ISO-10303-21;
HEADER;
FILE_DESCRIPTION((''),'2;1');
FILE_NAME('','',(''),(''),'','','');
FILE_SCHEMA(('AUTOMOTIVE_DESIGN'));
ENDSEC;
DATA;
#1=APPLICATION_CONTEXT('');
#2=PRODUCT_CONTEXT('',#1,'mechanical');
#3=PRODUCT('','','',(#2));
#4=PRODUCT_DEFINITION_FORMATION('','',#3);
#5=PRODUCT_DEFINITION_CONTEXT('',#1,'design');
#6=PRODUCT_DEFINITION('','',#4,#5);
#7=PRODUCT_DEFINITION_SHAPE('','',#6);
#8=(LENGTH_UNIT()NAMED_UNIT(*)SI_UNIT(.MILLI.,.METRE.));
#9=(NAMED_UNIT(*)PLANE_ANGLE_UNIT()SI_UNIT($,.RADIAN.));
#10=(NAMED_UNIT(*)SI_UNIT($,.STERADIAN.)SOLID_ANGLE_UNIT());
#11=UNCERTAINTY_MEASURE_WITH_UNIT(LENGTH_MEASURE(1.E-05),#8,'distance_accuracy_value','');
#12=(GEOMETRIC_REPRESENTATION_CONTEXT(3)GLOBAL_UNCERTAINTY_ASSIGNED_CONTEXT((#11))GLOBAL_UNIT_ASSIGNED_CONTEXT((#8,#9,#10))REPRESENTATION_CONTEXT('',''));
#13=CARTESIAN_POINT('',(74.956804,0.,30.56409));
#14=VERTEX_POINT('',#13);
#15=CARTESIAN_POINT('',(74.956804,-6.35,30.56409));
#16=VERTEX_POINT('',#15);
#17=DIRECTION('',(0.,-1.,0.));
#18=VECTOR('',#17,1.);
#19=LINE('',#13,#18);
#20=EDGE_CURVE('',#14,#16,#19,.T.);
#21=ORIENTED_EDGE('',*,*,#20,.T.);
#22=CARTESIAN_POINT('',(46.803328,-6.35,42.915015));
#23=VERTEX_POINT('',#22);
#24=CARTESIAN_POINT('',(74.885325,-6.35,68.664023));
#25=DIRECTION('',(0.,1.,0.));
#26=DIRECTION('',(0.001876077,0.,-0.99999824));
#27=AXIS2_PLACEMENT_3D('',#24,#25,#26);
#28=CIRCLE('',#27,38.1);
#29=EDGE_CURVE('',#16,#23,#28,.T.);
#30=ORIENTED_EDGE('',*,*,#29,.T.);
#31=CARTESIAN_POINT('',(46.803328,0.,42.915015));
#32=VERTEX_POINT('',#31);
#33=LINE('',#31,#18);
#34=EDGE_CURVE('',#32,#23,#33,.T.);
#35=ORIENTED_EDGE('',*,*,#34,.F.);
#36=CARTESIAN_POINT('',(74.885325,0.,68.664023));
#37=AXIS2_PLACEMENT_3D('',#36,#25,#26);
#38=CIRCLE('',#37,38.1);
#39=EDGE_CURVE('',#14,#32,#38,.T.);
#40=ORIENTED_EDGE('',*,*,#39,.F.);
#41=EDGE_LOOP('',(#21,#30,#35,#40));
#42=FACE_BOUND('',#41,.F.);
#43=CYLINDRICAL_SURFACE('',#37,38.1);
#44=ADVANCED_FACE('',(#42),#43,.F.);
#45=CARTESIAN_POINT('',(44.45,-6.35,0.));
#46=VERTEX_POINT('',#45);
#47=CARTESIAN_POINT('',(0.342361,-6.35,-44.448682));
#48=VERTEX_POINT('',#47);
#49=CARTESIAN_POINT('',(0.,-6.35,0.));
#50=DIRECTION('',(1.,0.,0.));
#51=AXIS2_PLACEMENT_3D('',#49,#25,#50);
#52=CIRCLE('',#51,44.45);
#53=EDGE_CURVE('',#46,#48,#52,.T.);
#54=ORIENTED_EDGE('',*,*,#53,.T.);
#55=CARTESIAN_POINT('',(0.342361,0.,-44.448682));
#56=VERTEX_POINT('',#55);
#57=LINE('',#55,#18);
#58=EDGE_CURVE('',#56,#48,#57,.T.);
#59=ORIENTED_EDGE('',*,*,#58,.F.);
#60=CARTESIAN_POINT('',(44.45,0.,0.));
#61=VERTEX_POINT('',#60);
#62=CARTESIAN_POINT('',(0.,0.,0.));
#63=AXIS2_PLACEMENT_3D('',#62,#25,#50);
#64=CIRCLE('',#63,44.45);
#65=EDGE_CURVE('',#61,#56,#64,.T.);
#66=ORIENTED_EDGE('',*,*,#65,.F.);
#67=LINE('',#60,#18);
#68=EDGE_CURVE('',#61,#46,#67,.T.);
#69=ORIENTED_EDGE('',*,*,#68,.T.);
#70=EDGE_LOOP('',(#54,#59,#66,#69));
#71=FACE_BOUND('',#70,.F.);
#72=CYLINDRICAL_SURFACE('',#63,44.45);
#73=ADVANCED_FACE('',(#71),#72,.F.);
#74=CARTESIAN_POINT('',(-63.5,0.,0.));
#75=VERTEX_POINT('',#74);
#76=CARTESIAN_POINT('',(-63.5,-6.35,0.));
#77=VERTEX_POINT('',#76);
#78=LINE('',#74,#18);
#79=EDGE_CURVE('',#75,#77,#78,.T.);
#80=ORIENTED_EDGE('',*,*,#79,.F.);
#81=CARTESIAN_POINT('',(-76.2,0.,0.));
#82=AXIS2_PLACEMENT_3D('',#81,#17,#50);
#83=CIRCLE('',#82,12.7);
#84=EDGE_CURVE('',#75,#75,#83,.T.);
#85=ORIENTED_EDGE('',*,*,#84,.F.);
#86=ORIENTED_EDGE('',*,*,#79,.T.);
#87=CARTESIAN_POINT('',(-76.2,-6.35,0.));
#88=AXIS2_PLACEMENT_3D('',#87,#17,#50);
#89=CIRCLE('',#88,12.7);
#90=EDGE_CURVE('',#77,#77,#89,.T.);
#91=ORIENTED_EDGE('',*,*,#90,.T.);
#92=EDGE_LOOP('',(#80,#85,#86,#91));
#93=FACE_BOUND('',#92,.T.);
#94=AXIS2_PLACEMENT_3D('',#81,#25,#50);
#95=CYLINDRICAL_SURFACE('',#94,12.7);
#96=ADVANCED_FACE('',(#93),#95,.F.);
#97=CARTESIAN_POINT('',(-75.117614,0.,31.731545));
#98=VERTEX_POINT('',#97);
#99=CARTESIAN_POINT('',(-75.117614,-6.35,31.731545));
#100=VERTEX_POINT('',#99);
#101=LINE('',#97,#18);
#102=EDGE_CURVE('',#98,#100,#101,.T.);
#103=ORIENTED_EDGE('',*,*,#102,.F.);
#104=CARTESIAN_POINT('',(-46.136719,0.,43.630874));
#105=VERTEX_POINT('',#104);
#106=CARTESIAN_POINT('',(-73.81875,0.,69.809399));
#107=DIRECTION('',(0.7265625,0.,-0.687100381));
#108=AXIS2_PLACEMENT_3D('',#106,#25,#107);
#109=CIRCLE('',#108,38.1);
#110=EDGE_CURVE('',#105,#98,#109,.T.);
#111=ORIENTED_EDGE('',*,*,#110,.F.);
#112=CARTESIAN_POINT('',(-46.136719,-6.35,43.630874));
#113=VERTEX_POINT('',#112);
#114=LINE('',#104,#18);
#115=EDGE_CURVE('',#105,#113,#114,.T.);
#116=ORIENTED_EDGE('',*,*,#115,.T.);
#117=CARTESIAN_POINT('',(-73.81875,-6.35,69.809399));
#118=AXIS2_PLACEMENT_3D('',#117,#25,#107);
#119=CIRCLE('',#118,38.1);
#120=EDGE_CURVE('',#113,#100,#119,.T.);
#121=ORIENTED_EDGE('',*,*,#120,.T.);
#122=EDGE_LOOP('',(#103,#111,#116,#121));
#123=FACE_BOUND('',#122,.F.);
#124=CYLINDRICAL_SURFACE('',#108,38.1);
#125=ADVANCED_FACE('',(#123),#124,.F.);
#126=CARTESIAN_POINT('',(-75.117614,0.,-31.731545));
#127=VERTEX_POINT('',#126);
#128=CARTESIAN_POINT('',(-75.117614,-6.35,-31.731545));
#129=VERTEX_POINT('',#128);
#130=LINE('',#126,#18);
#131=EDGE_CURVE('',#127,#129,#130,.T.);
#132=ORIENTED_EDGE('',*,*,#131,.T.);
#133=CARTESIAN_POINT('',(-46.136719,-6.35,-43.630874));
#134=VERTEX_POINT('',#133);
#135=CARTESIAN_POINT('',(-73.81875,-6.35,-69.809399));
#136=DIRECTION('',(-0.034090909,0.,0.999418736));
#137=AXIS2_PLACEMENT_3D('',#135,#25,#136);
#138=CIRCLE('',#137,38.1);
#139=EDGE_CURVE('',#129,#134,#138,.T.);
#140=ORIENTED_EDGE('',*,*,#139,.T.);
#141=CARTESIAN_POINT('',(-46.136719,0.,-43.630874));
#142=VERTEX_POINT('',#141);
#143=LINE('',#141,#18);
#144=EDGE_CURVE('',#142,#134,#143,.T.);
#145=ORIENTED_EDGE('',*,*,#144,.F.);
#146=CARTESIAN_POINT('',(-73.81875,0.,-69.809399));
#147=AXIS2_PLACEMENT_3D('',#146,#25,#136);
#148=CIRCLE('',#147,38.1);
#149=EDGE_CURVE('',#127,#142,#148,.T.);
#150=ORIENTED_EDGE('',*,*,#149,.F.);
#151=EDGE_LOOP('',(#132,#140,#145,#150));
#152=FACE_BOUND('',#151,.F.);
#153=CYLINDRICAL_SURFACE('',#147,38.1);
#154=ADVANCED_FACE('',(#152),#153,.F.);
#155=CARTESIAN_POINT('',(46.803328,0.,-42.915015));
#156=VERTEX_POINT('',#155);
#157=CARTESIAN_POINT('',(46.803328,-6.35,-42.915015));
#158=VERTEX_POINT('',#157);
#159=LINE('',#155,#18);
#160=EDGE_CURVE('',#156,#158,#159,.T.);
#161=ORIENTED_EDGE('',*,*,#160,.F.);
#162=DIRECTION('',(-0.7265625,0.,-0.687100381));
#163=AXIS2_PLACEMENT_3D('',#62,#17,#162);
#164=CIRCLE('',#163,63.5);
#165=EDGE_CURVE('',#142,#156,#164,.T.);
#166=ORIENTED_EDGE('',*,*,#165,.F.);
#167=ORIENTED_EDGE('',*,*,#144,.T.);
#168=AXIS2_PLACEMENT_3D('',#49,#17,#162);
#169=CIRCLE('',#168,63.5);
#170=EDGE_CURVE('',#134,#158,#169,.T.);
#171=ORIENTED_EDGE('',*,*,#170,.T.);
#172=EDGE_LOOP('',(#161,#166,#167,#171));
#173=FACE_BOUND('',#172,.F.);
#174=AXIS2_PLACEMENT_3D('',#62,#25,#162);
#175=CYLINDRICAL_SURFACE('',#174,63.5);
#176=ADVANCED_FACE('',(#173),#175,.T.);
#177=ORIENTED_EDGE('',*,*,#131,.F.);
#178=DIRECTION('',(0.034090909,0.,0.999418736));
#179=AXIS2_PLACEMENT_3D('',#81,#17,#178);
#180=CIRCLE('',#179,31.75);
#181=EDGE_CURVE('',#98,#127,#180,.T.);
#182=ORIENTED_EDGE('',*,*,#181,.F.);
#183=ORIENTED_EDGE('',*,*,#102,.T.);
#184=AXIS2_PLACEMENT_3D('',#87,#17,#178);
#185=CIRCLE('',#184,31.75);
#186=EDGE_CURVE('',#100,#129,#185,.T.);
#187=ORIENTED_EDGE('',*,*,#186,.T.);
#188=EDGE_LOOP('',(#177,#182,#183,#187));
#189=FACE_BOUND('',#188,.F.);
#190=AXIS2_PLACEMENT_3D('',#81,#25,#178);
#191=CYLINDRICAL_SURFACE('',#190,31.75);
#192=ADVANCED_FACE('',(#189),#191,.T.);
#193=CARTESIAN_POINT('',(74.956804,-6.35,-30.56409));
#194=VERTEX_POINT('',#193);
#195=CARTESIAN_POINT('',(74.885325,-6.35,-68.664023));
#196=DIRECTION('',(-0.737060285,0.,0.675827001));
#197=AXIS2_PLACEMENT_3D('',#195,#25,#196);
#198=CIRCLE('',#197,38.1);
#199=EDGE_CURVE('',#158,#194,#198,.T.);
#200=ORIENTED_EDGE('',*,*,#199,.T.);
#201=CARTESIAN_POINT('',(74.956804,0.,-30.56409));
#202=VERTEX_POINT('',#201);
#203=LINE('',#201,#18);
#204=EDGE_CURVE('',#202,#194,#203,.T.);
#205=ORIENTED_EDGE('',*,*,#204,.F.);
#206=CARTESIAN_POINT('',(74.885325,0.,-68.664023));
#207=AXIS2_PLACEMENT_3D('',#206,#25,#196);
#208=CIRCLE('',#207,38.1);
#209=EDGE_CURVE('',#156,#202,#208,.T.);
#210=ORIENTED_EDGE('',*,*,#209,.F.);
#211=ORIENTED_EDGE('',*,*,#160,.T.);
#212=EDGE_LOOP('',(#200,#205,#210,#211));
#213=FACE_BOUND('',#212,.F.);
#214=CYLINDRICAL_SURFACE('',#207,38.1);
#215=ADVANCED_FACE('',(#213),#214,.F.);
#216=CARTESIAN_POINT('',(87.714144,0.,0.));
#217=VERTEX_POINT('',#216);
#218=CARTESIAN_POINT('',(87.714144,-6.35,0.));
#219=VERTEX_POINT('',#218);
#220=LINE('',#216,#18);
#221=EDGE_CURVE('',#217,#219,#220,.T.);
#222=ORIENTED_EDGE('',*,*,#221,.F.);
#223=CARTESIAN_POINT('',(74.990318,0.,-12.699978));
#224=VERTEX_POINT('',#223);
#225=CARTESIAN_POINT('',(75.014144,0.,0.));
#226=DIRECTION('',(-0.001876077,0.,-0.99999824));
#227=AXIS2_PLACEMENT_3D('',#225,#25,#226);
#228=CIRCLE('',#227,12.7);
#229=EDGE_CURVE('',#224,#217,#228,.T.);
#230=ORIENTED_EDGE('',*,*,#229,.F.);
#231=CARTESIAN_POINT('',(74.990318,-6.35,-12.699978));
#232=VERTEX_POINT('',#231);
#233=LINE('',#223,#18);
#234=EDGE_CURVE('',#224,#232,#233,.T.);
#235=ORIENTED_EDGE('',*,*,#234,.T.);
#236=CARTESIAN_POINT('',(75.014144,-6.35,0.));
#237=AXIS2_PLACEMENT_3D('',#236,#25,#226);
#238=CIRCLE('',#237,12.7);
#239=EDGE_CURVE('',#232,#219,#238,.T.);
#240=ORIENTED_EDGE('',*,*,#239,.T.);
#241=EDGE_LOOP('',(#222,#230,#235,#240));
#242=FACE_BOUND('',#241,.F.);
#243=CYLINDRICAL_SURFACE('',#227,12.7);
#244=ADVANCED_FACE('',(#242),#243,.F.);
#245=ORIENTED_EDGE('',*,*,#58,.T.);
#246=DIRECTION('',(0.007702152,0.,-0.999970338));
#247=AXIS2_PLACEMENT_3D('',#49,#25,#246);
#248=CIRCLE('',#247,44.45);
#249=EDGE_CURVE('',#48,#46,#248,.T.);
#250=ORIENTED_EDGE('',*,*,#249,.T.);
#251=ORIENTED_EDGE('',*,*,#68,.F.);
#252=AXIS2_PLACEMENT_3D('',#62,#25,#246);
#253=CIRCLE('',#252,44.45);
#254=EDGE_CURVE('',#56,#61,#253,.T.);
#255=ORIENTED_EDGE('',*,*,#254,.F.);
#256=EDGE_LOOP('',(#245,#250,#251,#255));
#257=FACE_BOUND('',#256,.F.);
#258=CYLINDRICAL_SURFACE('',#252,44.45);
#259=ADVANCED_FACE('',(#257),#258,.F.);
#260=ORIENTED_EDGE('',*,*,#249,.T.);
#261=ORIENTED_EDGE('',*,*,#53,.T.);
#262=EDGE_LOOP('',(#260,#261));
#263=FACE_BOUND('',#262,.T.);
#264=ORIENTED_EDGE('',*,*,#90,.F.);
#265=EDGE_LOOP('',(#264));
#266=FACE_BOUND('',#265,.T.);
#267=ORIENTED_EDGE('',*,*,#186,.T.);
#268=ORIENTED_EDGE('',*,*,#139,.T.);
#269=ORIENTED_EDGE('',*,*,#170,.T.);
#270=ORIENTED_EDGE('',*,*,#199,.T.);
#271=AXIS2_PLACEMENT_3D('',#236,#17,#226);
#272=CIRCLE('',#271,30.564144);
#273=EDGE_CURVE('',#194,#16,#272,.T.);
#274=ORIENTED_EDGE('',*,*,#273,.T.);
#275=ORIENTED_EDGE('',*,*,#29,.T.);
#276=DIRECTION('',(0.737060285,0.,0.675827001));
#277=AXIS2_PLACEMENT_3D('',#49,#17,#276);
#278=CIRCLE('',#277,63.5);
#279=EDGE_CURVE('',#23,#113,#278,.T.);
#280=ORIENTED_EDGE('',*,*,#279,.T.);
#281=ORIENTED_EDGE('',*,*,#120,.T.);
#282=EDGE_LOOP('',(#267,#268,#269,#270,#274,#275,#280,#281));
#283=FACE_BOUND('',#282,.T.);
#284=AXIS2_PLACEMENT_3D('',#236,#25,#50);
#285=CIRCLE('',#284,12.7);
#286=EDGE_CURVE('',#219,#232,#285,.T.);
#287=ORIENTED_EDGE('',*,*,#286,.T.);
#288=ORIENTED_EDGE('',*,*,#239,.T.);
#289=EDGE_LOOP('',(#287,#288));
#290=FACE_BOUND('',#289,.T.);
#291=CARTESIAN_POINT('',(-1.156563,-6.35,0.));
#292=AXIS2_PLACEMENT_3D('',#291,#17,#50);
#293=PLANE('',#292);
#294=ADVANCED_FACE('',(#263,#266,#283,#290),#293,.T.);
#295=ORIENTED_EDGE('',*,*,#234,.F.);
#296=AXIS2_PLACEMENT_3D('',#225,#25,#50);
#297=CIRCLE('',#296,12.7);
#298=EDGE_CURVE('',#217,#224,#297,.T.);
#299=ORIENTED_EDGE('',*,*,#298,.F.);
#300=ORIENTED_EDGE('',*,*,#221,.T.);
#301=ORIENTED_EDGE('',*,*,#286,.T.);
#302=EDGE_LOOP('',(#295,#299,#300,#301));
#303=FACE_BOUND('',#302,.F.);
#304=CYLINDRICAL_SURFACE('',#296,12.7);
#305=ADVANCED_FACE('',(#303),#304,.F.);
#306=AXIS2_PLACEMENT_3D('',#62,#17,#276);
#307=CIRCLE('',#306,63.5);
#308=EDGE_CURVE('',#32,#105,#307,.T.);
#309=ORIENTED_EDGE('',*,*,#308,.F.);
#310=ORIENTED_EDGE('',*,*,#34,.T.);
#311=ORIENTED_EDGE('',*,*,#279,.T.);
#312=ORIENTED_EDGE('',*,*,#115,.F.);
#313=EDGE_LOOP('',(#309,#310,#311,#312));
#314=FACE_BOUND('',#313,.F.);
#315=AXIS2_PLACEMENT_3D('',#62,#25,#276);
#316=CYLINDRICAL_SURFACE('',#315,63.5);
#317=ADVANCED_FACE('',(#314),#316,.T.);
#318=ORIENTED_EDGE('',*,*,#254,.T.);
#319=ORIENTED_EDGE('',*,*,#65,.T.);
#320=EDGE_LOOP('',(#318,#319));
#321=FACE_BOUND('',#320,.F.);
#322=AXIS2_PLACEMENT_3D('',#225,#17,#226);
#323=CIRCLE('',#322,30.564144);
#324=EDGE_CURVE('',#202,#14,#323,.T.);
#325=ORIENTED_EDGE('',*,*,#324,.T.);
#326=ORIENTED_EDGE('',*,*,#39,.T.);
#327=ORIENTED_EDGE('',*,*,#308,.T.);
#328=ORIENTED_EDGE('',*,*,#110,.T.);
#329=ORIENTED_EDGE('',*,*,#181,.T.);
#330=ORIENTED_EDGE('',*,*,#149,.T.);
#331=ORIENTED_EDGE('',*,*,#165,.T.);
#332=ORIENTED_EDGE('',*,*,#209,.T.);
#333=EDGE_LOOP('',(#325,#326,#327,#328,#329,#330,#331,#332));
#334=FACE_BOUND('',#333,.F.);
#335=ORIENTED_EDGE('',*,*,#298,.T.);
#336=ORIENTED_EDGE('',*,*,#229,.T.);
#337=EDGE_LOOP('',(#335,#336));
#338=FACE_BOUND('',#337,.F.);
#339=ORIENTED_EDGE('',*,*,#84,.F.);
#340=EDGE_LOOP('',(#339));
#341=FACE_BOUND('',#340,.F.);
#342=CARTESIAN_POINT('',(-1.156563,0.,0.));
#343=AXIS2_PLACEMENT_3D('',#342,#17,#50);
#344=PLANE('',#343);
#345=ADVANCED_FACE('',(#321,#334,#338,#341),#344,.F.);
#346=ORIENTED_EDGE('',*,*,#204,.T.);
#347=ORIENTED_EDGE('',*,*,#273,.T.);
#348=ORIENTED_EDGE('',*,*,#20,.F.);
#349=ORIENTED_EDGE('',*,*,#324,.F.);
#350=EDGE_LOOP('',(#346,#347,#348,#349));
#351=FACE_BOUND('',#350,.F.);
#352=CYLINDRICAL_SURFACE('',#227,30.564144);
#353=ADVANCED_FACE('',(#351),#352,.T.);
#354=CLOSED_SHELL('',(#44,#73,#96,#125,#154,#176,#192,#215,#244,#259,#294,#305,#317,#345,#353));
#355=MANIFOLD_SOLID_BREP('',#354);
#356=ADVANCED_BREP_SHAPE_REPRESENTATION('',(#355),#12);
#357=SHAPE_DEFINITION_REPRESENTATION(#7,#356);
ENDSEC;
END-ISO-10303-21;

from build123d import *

# Parameters (mm, degrees)
F0_R     = 12.7
F1_DEPTH = 6.35


# Not quite as in the source:
# - a length typed as a fraction of an inch, garbled in the dataset ("3 / 203.2 mm" for 3/8 in), is restored


with BuildPart() as f1:
    # F0 (on Front) → F1 (new body)
    with BuildSketch(Plane.XZ):
        with BuildLine():
            ThreePointArc((-46.13671875, -43.6308741946), (-24.8918341596, -58.4178619274), (0.4890866537, -63.4981164622))
            ThreePointArc((0.4890866537, -63.4981164622), (25.7887406506, -58.0275008566), (46.8033281156, -42.9150145905))
            ThreePointArc((46.8033281156, -42.9150145905), (59.5789989506, -33.7738186545), (74.9568035052, -30.5640903944))
            ThreePointArc((74.9568035052, -30.5640903944), (105.5782883644, 0), (74.9568035052, 30.5640903944))
            ThreePointArc((74.9568035052, 30.5640903944), (59.5789989506, 33.7738186545), (46.8033281156, 42.9150145905))
            ThreePointArc((46.8033281156, 42.9150145905), (0.4890866537, 63.4981164622), (-46.13671875, 43.6308741946))
            ThreePointArc((-46.13671875, 43.6308741946), (-59.3475236203, 34.5646316236), (-75.1176136364, 31.7315448688))
            ThreePointArc((-75.1176136364, 31.7315448688), (-107.95, 0), (-75.1176136364, -31.7315448688))
            ThreePointArc((-75.1176136364, -31.7315448688), (-59.3475236203, -34.5646316236), (-46.13671875, -43.6308741946))
        make_face()
        with Locations((-76.2, 0)):
            Circle(F0_R, mode=Mode.SUBTRACT)
        with BuildLine():
            ThreePointArc((0.3423606576, -44.4486815235), (-31.5517070159, 31.3096196781), (44.45, 0))
            ThreePointArc((44.45, 0), (31.5517070159, -31.3096196781), (0.3423606576, -44.4486815235))
        make_face(mode=Mode.SUBTRACT)
        with BuildLine():
            ThreePointArc((87.7141441822, 0), (83.9859725242, -8.9886759982), (74.9903180088, -12.6999776501))
            ThreePointArc((74.9903180088, -12.6999776501), (66.0423158402, 8.9886759982), (87.7141441822, 0))
        make_face(mode=Mode.SUBTRACT)
    extrude(amount=F1_DEPTH)


solid = f1.part
